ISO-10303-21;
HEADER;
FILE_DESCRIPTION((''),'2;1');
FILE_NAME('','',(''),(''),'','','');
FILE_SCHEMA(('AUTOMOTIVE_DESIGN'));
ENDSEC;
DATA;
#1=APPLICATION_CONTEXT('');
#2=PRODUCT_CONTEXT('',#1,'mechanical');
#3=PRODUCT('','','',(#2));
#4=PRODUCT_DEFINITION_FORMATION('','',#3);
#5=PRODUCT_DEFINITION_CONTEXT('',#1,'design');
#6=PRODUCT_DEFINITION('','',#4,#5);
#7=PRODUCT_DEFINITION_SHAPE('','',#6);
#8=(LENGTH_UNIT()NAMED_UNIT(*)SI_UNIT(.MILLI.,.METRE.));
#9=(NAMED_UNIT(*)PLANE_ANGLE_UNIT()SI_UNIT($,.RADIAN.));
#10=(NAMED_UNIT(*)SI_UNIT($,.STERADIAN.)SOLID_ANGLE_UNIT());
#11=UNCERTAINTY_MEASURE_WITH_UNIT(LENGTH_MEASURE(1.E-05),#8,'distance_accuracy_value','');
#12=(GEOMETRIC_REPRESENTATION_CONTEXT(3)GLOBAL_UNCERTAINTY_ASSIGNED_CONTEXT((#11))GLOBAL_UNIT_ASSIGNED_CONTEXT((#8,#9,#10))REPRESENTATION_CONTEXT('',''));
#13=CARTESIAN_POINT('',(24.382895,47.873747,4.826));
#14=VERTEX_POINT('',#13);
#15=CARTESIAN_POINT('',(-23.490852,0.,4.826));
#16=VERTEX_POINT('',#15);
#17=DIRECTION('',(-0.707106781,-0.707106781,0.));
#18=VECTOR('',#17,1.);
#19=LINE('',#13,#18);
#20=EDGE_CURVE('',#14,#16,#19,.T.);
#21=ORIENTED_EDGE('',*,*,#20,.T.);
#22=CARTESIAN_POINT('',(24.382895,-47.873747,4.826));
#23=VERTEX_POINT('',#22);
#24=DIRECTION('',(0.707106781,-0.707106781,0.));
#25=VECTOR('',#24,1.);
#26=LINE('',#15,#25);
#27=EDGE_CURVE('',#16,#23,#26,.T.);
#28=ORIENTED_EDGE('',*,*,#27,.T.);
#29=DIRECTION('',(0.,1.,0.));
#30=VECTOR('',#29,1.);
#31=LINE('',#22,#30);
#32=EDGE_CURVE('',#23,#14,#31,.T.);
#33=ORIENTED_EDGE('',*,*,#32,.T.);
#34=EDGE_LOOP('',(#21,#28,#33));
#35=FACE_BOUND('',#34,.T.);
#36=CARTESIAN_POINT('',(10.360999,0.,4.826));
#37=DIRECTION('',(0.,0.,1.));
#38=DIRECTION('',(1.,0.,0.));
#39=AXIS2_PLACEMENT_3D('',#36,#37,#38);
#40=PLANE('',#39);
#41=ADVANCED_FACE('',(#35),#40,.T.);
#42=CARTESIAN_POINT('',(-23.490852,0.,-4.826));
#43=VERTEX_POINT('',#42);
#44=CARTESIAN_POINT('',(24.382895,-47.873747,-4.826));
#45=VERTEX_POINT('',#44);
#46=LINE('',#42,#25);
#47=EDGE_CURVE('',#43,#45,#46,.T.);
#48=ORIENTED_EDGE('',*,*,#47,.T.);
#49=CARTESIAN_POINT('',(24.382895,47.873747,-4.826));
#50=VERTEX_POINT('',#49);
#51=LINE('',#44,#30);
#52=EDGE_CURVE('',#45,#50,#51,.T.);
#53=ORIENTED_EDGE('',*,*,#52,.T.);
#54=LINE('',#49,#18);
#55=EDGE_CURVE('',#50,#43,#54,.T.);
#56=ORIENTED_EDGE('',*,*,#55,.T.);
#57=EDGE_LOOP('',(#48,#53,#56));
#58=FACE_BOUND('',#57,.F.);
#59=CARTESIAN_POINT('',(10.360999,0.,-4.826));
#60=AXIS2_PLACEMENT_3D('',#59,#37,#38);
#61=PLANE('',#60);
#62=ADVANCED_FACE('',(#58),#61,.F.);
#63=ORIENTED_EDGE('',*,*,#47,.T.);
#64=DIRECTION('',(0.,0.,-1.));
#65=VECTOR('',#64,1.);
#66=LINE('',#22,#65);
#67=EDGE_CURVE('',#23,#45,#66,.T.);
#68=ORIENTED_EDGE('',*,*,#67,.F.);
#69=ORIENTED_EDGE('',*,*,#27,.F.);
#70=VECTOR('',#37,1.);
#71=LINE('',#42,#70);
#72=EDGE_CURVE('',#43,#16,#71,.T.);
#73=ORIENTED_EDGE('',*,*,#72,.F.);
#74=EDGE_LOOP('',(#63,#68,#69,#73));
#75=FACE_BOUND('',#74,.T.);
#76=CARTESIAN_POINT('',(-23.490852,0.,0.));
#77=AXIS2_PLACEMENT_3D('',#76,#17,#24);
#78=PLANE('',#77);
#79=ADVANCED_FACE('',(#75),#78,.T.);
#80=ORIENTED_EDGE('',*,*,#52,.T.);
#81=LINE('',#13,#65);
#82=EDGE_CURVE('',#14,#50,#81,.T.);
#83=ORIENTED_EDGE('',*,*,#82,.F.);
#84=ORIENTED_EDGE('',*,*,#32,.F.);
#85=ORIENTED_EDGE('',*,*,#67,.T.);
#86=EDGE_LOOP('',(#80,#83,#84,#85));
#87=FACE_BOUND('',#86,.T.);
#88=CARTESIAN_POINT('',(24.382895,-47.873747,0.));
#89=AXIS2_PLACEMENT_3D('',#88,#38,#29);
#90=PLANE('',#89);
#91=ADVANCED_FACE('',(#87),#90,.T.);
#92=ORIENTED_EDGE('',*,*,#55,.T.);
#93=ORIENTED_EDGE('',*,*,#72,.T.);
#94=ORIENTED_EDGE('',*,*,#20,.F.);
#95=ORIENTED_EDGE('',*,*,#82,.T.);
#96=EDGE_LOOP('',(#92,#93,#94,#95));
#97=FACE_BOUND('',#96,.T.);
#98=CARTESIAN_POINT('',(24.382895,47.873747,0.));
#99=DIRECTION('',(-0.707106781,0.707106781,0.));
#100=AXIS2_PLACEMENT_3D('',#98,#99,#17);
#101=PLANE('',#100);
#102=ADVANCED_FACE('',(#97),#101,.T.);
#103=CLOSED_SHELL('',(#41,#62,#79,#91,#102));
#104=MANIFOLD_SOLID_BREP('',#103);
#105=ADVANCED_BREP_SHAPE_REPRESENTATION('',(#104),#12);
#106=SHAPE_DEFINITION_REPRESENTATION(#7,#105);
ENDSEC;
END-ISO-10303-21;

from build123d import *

# Parameters (mm, degrees)
F3_DEPTH = 4.826


# Not quite as in the source:
# - the program builds the solid bodies; features that only make, move or delete a surface that nothing else refers to are left out


with BuildPart() as f3:
    # F2 (on Top) → F3 (new body, symmetric)
    with BuildSketch(Plane.XY):
        Polygon((24.3828949223, 47.8737466673), (-23.490851745, 0), (24.3828949223, -47.8737466673), align=None)
    extrude(amount=F3_DEPTH, both=True)


solid = f3.part
